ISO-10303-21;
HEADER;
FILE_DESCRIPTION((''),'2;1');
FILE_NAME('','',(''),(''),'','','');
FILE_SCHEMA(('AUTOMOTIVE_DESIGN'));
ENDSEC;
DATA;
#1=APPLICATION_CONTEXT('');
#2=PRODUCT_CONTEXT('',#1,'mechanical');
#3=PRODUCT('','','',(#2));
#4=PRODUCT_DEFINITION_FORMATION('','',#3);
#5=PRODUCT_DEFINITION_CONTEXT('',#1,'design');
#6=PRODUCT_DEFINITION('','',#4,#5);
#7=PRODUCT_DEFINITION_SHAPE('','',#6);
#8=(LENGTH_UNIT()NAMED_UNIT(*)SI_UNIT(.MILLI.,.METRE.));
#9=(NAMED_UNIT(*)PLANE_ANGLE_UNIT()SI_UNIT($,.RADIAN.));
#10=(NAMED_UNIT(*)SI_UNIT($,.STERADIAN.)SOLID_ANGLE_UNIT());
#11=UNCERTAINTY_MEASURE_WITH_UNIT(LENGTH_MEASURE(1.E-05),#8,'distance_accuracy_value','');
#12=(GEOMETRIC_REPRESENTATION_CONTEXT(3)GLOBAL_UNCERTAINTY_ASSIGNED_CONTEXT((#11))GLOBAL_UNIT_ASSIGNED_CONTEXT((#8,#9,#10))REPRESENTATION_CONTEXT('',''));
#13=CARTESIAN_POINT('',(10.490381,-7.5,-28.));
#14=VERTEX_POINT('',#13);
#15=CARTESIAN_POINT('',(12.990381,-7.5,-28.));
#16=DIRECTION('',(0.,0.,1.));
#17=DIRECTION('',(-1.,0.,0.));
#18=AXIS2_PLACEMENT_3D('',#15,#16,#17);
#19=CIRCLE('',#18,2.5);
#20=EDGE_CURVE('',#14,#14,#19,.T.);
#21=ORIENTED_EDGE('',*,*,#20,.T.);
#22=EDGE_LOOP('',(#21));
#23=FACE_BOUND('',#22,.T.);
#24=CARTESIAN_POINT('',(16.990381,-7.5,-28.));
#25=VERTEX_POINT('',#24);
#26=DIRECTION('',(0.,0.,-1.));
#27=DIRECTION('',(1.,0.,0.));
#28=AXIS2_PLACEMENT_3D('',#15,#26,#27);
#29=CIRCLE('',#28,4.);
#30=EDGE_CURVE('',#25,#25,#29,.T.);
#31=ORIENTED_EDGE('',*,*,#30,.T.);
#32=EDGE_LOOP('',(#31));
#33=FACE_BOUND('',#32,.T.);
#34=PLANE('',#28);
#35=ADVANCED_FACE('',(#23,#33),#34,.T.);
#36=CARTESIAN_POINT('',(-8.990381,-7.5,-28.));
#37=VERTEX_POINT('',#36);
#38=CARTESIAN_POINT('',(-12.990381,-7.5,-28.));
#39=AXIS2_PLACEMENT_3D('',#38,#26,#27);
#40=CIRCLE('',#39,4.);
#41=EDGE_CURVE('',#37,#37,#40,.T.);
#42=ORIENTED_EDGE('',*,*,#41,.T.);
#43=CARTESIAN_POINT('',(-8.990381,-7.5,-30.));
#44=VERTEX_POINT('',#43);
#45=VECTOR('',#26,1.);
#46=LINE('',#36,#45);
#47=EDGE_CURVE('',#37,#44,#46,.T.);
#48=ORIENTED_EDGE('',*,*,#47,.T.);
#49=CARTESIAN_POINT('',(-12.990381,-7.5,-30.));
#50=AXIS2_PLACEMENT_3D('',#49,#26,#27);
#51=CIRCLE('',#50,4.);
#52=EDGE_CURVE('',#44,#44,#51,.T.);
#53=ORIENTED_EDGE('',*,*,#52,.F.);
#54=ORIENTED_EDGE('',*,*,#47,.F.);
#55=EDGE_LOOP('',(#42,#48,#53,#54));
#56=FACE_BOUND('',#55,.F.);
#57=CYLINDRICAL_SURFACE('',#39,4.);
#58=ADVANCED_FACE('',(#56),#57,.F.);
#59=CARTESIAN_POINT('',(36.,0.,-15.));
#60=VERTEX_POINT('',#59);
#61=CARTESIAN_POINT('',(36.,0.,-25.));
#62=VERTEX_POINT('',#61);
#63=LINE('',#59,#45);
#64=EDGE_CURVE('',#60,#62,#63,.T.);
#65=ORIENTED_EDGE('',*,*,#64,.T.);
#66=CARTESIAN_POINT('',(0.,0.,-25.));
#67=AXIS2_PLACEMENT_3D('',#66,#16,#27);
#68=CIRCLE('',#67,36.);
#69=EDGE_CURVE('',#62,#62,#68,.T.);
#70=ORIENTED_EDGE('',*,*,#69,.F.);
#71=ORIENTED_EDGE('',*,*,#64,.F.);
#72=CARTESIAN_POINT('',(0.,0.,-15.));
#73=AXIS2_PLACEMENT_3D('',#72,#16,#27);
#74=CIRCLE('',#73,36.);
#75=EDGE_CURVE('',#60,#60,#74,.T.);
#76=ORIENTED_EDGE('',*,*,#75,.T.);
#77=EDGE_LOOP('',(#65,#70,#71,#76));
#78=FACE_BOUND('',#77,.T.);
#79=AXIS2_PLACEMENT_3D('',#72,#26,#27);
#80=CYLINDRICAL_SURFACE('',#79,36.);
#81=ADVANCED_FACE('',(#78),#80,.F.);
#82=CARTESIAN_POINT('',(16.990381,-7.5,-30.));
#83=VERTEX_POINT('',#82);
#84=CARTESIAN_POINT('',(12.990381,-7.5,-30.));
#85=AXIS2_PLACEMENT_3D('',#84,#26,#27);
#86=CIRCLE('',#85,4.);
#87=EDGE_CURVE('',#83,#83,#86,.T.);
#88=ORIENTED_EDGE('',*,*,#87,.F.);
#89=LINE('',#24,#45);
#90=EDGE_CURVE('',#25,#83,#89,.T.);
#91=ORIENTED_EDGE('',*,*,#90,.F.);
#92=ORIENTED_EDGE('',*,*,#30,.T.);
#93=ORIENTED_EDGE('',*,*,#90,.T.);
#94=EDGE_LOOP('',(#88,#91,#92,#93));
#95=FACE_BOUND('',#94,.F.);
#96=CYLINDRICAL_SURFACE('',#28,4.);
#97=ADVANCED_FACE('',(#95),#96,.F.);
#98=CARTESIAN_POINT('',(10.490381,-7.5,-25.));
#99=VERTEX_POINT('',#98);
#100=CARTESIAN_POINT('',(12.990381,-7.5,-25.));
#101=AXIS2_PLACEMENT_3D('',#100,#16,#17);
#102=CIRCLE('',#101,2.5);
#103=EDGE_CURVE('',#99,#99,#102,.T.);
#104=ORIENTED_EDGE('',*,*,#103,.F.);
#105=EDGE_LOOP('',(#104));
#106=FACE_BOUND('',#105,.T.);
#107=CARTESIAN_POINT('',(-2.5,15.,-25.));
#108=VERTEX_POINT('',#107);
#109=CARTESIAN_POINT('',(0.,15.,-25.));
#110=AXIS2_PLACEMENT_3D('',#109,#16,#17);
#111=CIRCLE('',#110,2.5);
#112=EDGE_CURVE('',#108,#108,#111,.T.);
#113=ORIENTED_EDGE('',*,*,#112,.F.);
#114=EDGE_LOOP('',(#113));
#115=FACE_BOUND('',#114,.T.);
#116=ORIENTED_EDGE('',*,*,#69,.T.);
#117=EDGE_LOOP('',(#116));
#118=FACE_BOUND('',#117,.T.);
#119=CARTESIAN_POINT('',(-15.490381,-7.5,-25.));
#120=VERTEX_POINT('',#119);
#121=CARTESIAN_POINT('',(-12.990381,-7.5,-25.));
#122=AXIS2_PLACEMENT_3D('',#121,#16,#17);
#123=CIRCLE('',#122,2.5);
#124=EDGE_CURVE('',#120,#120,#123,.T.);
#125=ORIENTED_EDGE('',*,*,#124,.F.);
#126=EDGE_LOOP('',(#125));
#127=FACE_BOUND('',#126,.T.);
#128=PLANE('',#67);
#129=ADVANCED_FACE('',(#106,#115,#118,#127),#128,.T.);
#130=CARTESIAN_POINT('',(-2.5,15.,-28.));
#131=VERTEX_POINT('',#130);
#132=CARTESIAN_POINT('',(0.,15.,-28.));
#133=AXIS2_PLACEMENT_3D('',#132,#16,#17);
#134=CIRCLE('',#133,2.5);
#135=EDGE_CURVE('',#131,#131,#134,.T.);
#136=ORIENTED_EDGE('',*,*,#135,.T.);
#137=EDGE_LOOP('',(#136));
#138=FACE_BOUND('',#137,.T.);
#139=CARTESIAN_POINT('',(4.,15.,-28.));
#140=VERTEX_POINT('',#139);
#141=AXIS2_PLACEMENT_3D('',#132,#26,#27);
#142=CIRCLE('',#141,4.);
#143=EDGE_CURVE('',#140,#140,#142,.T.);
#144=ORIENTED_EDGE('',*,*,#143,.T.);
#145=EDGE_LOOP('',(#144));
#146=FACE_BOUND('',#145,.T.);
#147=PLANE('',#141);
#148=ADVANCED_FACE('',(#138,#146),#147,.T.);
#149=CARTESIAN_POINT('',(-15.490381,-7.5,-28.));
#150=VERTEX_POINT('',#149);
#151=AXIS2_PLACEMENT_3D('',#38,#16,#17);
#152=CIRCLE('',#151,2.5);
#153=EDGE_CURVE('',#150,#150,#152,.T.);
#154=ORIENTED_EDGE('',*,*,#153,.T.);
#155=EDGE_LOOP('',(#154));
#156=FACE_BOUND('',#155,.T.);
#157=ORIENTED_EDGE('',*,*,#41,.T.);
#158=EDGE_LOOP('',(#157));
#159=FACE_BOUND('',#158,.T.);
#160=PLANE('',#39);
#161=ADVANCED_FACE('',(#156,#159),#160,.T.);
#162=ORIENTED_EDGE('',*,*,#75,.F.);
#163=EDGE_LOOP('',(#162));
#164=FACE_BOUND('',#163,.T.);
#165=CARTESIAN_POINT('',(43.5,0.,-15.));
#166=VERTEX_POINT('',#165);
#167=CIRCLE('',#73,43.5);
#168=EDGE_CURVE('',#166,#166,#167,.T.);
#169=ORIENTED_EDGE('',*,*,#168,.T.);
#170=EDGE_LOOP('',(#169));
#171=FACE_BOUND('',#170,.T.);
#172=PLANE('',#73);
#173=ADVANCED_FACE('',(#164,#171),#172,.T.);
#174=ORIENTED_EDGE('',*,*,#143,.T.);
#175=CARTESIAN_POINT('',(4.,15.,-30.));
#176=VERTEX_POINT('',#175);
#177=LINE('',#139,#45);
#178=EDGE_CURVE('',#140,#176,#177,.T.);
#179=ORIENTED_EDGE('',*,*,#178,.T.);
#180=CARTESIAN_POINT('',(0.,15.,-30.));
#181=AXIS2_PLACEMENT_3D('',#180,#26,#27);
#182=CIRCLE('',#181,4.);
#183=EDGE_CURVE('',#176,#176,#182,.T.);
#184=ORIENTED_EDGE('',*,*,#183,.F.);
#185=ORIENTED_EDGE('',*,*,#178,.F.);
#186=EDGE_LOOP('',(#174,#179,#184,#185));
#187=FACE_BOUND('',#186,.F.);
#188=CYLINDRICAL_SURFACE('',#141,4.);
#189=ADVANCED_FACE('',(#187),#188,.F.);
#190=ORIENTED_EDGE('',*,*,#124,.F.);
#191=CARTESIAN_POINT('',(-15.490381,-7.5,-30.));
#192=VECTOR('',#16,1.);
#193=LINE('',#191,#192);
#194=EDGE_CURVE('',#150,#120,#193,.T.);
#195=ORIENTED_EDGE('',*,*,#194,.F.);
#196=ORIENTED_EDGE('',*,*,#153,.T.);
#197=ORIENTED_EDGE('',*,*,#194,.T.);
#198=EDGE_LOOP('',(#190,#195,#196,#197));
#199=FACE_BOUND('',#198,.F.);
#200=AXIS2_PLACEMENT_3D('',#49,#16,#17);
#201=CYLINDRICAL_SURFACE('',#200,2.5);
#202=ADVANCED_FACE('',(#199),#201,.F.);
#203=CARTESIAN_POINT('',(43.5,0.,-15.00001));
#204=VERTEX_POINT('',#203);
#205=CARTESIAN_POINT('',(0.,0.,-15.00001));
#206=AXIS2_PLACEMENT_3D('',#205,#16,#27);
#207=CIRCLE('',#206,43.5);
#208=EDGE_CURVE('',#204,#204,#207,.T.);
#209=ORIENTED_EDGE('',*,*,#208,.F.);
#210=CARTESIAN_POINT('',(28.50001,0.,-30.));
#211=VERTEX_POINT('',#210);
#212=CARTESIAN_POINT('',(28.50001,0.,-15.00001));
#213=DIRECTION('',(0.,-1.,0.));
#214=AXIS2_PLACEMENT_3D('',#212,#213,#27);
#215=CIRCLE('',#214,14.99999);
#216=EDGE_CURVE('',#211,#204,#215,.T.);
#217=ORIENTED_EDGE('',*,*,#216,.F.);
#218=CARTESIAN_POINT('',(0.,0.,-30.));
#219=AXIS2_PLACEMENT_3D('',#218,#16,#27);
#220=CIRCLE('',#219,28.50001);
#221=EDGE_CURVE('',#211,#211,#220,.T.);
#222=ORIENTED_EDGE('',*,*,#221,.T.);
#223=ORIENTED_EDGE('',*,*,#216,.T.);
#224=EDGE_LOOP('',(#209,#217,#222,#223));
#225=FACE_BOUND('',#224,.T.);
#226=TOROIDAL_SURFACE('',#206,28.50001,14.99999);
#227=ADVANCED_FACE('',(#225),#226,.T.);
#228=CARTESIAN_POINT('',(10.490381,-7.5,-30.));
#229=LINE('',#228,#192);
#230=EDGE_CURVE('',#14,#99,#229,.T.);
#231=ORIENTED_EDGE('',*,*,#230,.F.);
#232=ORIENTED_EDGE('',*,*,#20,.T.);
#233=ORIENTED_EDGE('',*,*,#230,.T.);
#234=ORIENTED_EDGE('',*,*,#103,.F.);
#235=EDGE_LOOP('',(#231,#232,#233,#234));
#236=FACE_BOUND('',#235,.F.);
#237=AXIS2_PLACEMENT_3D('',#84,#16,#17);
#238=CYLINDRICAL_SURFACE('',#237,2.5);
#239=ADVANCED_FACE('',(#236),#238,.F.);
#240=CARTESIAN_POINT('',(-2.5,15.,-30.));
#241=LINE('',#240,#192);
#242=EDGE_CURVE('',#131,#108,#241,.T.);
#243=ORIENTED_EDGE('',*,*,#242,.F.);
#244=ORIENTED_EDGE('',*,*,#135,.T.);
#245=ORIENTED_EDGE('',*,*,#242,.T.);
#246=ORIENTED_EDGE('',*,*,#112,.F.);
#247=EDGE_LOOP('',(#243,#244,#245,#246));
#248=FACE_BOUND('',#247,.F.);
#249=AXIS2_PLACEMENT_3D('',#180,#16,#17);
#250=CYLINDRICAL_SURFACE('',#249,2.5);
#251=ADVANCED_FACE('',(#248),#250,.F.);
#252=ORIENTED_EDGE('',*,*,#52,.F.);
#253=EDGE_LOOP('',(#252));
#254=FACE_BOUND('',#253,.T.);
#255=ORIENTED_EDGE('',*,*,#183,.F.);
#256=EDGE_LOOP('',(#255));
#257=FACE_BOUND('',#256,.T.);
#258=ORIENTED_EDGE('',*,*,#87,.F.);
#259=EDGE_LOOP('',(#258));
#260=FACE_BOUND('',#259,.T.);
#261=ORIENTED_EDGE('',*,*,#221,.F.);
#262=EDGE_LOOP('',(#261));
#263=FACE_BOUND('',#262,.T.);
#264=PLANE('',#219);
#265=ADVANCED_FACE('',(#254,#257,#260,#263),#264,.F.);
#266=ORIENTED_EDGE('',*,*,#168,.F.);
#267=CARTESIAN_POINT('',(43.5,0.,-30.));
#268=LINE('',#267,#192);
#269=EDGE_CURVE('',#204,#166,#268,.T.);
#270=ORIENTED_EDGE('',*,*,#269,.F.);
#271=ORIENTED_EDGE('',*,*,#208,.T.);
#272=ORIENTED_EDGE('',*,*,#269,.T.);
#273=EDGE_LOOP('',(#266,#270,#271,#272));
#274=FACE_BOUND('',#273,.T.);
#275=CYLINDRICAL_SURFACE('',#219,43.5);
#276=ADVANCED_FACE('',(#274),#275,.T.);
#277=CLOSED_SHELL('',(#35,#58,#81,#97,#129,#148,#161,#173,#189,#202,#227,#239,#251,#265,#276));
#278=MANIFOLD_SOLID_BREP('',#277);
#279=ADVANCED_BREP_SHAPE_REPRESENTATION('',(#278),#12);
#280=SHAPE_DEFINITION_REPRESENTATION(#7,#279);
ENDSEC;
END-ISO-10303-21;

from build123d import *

# Parameters (mm, degrees)
F2_R           = 14.99999
F4_D           = 5
F4_CBORE_D     = 8
F4_CBORE_DEPTH = 2


# Not quite as in the source:
# - a fillet or chamfer is up to 0.001 mm smaller than in the source, because OpenCascade refuses the exact size


with BuildPart() as f1:
    # F0 (on Front) → F1 (revolve)
    with BuildSketch(Plane.XZ):
        Polygon((36, -25), (0, -25), (0, -30), (43.5, -30), (43.5, -15), (36, -15), align=None)
    revolve(axis=Axis((0, 0, -27.5), (0, 0, 1)))

    # F2 (radius 15 in the source; OpenCascade refuses exactly that, so slightly less here)
    f2_edges = [f1.edges().sort_by_distance(p)[0] for p in [
        (-43.5, 0, -30),
    ]]
    fillet(f2_edges, radius=F2_R)

    # F4 (through all)
    with Locations(Plane(origin=(0, 0, -30), x_dir=(1, 0, 0), z_dir=(0, 0, -1))):
        with Locations((-12.9903810568, 7.5), (12.9903810568, 7.5), (0, -15)):
            CounterBoreHole(F4_D / 2, F4_CBORE_D / 2, F4_CBORE_DEPTH)


solid = f1.part
